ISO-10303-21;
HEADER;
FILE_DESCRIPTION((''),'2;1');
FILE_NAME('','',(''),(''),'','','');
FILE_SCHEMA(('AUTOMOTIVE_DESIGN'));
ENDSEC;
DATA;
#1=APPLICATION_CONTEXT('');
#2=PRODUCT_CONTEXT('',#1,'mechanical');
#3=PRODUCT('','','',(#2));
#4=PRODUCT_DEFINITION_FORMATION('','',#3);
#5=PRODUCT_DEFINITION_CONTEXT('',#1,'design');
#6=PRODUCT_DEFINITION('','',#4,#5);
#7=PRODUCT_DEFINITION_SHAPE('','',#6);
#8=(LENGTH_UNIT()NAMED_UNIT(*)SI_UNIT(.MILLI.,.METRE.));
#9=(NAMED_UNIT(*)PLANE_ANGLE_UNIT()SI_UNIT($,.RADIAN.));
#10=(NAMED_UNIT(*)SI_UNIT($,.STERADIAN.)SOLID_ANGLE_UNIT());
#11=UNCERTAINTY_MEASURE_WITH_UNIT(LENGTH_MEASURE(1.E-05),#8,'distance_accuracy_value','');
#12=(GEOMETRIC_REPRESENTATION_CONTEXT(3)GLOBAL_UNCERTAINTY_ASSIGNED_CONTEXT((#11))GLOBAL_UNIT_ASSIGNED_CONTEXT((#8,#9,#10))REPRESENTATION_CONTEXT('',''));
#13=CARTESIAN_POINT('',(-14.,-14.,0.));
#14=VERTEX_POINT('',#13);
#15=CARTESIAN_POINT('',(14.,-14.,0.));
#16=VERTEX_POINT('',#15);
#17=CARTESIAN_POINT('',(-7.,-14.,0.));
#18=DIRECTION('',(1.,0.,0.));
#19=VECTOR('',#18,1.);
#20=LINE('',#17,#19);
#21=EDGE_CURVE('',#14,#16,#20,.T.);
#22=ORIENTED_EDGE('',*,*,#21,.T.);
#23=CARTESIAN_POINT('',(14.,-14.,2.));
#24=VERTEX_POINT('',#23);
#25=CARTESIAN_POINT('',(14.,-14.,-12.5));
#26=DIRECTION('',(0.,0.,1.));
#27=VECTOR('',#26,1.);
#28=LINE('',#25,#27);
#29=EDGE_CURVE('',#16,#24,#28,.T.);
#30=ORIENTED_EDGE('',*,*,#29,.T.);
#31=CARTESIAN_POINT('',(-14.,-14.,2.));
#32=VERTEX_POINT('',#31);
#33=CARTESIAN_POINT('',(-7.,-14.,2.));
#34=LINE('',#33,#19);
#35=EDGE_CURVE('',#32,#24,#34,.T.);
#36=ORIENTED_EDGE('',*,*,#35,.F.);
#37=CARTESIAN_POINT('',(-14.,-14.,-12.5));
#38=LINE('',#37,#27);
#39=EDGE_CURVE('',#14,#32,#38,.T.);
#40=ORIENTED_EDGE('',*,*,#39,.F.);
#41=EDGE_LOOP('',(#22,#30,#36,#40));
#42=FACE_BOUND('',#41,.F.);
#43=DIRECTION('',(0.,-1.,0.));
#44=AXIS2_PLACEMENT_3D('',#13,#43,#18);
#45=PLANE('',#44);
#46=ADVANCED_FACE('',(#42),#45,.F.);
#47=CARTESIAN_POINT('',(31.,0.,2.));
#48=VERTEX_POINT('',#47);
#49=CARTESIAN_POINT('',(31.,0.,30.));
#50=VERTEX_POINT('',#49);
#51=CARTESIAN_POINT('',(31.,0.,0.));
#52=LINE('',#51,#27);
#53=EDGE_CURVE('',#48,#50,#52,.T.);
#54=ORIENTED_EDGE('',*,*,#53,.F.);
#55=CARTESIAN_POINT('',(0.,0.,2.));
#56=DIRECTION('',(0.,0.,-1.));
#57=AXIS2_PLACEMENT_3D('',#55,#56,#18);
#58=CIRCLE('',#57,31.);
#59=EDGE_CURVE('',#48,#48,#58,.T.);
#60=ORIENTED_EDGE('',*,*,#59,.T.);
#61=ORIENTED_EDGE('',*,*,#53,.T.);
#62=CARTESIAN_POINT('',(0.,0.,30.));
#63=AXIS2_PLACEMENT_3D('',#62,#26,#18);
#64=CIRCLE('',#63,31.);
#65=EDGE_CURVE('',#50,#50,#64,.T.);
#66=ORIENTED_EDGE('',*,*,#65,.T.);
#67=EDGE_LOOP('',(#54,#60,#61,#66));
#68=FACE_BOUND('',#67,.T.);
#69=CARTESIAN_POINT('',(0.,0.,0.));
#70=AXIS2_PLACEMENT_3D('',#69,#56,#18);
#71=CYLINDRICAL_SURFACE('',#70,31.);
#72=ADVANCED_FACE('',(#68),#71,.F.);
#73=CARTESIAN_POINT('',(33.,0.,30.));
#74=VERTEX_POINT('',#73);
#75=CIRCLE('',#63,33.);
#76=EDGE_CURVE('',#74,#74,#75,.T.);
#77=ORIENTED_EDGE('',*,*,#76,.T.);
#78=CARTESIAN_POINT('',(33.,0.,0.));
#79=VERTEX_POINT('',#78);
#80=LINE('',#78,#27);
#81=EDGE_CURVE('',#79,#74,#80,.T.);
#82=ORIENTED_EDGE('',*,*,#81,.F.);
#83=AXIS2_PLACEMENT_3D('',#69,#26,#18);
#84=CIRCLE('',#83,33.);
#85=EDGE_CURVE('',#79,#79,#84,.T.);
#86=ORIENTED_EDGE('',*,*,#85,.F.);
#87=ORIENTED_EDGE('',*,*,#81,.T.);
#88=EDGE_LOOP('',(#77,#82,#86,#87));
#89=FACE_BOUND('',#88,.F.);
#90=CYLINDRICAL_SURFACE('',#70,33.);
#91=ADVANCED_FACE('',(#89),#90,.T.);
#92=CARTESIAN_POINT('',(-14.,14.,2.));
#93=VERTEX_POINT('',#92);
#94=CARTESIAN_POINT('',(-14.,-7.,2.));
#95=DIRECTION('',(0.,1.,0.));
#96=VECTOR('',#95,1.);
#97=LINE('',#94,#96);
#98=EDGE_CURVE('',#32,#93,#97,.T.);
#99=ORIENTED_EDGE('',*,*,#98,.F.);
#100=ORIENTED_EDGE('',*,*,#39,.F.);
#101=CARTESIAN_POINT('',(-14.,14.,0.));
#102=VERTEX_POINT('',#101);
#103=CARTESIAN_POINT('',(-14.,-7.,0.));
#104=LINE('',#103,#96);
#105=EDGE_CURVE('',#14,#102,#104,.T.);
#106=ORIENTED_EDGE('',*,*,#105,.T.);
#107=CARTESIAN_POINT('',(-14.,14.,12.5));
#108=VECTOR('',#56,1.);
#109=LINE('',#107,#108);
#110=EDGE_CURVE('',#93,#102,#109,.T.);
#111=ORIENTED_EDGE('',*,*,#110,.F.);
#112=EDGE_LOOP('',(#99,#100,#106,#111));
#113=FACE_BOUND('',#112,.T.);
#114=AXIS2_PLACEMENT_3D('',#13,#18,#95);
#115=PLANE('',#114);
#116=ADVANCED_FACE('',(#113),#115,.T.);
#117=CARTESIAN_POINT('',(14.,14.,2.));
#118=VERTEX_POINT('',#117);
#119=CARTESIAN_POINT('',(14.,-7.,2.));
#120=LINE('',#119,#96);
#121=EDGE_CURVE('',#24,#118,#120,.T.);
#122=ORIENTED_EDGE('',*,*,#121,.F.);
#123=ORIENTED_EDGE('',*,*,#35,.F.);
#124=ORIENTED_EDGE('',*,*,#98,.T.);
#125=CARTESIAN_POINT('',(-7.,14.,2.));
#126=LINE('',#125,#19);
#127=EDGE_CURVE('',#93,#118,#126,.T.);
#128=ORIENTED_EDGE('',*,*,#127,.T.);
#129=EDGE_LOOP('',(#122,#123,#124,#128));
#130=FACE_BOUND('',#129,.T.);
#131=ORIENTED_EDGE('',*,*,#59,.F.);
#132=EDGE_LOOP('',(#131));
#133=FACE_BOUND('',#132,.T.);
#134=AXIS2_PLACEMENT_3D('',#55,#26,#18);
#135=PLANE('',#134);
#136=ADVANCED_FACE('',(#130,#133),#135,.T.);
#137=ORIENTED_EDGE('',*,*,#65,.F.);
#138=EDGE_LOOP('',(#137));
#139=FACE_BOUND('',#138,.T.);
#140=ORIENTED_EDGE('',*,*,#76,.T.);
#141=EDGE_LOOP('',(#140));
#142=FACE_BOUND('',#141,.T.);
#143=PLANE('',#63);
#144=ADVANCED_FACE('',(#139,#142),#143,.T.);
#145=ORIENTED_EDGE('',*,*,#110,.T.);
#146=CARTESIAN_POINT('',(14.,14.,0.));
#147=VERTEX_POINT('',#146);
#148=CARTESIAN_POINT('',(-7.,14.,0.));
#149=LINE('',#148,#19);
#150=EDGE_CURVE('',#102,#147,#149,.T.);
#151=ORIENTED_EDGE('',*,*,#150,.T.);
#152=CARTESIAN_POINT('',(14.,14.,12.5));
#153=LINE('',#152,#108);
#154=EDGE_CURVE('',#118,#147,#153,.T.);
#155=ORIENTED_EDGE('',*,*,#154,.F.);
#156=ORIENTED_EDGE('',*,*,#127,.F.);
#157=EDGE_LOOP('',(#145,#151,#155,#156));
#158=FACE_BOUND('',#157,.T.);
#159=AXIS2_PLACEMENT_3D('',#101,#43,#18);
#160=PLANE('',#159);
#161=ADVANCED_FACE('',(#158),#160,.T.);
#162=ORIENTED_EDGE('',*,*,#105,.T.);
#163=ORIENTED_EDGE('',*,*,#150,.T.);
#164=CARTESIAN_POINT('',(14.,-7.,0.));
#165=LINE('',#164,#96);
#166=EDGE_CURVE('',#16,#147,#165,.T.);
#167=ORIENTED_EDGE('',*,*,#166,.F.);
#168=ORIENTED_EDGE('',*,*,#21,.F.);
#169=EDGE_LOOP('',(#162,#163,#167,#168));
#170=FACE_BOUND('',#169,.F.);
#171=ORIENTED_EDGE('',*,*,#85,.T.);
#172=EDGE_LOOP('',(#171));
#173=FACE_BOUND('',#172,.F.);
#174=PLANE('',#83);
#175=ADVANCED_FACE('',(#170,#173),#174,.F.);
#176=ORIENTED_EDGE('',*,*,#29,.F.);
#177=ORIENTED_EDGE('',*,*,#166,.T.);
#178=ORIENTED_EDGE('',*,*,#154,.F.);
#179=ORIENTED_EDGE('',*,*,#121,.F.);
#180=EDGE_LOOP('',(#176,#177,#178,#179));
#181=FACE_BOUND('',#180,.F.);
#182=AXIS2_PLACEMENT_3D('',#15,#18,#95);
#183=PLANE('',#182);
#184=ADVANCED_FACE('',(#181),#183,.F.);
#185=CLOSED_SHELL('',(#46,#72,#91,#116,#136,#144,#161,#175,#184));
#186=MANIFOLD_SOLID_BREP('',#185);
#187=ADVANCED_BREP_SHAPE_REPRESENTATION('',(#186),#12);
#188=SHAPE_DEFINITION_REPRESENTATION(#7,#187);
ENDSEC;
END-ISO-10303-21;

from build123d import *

# Parameters (mm, degrees)
F0_R     = 33
F1_DEPTH = 30
F2_T     = -2
F3_DEPTH = 109
F4_W     = 28
F4_H     = 28
F5_DEPTH = 12.5


# Not quite as in the source:
# - an extrude ends at something that could not be found from the text; its depth is read off the source's solid


with BuildPart() as f1:
    # F0 (on Top) → F1 (new body)
    with BuildSketch(Plane.XY):
        Circle(F0_R)
    extrude(amount=F1_DEPTH)

    # F2
    f2_openings = [f1.faces().sort_by_distance(p)[0] for p in [
        (0, 0, 30),
    ]]
    offset(amount=F2_T, openings=f2_openings)

    # F0 (on Top) → F3 (cut, through all)
    with BuildSketch(Plane.XY):
        Circle(F0_R)
    extrude(amount=-F3_DEPTH, mode=Mode.SUBTRACT)

    # F4 (on face) → F5 (cut, symmetric)
    with BuildSketch(Plane.XY):
        Rectangle(F4_W, F4_H)
    extrude(amount=F5_DEPTH, both=True, mode=Mode.SUBTRACT)


solid = f1.part
